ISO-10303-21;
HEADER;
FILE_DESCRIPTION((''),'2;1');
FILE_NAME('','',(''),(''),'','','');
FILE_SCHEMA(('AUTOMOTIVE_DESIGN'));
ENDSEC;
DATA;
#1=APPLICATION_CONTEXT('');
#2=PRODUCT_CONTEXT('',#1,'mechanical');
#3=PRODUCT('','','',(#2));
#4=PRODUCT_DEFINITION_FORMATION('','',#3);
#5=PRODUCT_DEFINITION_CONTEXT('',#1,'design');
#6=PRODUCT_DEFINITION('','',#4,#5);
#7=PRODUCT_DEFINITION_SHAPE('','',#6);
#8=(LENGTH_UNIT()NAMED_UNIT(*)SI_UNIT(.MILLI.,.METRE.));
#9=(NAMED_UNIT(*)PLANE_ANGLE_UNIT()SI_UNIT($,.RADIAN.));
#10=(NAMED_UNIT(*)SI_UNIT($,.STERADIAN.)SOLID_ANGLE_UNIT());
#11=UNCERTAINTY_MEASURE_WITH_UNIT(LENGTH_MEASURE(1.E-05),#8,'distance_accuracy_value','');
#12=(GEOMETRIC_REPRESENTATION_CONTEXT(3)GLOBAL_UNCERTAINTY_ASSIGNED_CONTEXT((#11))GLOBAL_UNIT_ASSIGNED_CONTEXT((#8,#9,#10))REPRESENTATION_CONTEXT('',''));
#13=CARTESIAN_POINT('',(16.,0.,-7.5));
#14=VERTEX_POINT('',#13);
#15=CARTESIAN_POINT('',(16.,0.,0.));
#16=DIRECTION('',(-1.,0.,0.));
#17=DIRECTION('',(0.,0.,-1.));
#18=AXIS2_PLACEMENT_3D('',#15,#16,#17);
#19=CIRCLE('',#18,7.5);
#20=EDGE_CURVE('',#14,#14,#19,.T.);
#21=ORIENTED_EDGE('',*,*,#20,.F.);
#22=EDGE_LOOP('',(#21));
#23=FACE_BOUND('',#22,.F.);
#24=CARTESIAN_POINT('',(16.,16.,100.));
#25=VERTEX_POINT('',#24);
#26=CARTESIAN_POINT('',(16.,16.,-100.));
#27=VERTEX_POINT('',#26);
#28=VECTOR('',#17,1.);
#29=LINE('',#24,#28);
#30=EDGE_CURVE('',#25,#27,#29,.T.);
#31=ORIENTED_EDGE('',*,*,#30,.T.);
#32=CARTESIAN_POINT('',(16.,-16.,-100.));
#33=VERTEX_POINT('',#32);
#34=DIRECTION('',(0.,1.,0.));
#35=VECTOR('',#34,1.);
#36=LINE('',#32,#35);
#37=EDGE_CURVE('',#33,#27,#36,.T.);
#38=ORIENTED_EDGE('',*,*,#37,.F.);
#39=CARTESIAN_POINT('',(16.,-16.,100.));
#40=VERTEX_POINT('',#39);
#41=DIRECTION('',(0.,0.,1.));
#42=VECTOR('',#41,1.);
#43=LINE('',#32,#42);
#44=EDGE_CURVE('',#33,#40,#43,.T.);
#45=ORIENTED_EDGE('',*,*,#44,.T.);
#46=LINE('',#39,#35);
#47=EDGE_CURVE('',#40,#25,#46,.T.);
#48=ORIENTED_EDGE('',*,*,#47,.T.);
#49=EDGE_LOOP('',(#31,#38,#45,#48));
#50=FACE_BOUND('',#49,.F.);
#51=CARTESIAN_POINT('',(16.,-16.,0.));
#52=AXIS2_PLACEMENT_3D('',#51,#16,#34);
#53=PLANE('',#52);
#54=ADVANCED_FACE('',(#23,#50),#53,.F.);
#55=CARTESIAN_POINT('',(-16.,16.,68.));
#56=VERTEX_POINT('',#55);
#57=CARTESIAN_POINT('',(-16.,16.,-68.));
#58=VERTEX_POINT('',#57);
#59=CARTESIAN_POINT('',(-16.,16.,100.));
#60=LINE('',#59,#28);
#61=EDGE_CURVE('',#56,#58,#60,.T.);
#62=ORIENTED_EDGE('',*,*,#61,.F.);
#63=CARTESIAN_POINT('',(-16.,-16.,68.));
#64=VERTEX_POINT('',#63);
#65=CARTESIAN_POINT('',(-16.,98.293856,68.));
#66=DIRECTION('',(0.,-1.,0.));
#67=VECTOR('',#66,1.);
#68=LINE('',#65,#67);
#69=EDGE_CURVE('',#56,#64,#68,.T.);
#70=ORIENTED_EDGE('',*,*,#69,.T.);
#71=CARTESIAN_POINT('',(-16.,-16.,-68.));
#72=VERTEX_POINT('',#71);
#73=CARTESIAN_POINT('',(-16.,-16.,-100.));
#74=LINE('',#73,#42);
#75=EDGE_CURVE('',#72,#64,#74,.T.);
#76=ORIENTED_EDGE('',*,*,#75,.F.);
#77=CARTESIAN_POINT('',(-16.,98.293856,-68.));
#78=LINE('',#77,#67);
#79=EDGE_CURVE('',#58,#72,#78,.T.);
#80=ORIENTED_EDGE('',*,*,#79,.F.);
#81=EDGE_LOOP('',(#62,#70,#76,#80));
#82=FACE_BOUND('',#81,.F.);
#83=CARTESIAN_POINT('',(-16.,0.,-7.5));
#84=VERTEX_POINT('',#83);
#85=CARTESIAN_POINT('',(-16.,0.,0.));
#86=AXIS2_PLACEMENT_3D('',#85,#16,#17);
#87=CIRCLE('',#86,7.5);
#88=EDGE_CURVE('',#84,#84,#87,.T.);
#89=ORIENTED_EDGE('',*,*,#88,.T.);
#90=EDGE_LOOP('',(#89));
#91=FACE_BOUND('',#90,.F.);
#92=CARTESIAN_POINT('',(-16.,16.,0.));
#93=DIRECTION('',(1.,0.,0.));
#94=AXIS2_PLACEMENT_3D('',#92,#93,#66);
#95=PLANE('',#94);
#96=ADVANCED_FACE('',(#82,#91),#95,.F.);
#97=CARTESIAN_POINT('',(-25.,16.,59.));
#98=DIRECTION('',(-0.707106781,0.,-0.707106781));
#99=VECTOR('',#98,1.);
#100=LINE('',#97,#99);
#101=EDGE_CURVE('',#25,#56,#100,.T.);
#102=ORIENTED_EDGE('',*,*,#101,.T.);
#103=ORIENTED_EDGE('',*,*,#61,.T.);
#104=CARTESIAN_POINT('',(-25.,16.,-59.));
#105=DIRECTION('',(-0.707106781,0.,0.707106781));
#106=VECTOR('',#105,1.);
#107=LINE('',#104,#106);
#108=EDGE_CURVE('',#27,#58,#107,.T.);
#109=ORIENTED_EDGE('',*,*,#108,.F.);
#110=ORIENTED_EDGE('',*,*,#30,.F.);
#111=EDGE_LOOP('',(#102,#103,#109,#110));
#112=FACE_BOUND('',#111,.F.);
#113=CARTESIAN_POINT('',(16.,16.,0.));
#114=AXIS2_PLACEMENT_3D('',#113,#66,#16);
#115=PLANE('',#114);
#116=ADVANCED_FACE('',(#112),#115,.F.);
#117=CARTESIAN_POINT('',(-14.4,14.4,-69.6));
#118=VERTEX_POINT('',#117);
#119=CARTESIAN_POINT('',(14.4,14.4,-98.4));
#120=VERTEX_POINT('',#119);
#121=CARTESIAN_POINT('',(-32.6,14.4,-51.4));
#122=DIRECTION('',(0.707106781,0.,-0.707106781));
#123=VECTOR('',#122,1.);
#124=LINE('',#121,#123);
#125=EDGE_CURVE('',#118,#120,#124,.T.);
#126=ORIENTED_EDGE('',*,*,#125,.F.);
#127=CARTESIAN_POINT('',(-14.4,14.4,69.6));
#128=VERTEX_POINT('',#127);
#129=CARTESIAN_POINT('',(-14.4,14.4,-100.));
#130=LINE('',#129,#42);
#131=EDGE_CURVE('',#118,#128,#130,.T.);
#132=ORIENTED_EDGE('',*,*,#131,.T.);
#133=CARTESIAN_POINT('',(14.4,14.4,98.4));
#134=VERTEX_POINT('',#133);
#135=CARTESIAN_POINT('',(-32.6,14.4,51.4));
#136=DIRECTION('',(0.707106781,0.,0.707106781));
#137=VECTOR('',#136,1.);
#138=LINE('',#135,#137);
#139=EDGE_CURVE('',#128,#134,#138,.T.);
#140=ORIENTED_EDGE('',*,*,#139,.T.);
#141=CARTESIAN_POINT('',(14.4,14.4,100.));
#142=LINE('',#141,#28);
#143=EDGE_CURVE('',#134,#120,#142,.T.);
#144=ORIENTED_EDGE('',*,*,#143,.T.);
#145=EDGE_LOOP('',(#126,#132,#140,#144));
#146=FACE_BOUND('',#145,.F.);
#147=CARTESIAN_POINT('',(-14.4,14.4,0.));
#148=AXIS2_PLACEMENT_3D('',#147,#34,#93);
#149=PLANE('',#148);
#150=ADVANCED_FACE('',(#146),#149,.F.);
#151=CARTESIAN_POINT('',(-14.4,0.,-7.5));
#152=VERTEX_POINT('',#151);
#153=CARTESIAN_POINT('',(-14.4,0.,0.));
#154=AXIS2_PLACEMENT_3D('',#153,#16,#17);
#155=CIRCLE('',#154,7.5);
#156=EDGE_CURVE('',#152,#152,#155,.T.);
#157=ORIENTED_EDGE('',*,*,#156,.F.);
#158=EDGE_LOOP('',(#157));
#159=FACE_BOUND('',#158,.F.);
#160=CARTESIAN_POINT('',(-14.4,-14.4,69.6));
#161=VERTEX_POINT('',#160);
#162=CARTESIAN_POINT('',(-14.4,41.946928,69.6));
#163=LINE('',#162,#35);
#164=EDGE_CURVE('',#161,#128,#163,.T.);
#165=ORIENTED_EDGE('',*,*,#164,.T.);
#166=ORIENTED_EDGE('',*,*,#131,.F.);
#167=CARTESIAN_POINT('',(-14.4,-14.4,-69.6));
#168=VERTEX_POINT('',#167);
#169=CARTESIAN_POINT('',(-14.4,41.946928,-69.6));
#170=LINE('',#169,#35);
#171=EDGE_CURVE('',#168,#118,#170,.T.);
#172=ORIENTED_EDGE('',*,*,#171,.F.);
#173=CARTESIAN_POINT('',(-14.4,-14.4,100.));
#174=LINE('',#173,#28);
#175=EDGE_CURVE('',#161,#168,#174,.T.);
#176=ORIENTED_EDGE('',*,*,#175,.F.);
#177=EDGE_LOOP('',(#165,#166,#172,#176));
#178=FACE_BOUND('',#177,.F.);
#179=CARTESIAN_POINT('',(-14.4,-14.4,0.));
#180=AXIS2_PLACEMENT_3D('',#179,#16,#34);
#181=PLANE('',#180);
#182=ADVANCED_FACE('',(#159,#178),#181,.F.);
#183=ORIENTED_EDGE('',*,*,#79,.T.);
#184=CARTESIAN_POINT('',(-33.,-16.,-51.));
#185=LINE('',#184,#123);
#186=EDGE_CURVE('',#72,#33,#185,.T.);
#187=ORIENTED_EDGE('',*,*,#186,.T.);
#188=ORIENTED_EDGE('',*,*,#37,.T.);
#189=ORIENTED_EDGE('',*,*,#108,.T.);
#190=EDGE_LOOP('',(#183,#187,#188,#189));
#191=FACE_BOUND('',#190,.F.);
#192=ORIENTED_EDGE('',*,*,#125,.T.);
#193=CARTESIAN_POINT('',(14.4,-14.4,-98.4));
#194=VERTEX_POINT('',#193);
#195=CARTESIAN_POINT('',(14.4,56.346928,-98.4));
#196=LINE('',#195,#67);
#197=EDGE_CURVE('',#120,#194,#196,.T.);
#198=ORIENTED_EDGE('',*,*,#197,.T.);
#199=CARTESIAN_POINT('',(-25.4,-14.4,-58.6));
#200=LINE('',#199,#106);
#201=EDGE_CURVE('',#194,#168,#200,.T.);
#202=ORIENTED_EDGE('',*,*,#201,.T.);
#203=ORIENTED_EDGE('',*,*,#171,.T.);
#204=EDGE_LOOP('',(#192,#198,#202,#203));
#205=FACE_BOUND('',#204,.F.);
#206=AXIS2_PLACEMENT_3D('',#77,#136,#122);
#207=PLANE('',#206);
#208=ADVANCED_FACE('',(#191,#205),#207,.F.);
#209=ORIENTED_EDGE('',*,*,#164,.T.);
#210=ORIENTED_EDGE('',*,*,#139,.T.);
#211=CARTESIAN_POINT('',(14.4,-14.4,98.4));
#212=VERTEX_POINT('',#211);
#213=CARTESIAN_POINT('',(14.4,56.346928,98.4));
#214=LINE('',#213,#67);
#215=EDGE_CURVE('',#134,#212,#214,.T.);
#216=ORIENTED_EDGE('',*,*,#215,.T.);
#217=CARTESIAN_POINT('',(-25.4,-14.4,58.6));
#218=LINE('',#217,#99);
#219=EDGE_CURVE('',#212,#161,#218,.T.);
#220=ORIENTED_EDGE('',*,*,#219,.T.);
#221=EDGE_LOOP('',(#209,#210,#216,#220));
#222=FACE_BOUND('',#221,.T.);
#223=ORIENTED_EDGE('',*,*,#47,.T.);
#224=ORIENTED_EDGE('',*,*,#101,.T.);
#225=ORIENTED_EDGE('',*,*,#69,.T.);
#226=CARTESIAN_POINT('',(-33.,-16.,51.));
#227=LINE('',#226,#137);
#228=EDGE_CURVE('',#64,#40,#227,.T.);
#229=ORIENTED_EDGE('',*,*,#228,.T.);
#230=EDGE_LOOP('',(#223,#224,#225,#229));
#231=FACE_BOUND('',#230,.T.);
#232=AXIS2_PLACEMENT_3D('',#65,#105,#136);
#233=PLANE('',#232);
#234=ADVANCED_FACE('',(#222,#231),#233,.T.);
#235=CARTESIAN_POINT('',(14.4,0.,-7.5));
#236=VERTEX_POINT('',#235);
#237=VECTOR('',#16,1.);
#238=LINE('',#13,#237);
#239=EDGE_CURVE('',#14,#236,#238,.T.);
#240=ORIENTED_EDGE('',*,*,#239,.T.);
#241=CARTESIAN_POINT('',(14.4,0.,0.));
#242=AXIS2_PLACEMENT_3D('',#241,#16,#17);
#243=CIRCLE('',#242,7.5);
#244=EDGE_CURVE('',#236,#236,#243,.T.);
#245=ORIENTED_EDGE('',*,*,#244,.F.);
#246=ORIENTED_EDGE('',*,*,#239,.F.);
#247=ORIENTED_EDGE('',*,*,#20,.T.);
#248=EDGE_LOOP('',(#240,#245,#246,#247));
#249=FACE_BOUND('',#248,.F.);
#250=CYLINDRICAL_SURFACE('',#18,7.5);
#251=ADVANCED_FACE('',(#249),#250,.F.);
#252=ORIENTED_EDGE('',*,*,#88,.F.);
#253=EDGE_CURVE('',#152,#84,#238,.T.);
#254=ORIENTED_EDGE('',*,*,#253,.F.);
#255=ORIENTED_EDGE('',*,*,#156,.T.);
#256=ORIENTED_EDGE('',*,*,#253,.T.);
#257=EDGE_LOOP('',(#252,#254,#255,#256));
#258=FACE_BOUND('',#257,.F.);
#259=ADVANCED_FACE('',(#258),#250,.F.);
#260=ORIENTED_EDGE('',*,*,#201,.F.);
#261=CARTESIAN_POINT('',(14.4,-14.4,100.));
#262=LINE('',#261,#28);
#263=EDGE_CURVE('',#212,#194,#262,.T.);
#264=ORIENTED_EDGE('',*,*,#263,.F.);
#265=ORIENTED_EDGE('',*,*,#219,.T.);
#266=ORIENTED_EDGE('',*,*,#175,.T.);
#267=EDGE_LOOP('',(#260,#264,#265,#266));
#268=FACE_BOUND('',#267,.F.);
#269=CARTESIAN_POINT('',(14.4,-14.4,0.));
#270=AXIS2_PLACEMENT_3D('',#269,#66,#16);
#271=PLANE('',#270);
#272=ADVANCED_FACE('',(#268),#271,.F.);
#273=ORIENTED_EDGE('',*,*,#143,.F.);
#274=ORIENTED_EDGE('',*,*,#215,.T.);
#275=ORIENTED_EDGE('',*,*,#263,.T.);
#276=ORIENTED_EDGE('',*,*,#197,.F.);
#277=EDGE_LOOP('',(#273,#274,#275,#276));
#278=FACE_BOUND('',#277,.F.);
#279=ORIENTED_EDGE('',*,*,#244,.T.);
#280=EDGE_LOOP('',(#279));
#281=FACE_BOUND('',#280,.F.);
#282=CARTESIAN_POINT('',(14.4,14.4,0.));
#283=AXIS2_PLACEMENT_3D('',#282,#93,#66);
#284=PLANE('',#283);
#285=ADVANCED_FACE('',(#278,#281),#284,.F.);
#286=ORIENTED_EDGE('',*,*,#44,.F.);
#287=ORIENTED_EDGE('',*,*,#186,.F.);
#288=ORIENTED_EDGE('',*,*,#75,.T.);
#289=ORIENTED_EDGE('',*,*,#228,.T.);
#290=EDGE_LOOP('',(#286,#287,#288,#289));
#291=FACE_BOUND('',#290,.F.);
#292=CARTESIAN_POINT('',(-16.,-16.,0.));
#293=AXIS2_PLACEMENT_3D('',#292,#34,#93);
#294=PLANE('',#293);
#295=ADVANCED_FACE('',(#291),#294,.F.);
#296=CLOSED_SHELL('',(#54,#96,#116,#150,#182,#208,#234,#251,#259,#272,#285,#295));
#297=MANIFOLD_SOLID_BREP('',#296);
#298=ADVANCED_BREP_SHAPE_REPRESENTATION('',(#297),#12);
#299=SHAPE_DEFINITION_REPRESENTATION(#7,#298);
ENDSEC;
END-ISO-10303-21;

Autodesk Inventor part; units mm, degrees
ref_plane "YZ Plane" through (0, 0, 0) normal (1, 0, 0) x (0, 1, 0)
ref_plane "XZ Plane" through (0, 0, 0) normal (0, 1, 0) x (-1, 0, 0)
ref_plane "XY Plane" through (0, 0, 0) normal (0, 0, 1) x (1, 0, 0)
sketch "スケッチ1" plane through (0, 0, 0) normal (0, 0, 1) x (1, 0, 0)
  line L0 (-16, -16) -> (16, -16)
  line L1 (16, -16) -> (16, 16)
  line L2 (16, 16) -> (-16, 16)
  line L3 (-16, 16) -> (-16, -16)
  line L4 (-16, -16) -> (16, 16) construction
  line L5 (16, -16) -> (-16, 16) construction
  line L6 (-14.4, 14.4) -> (14.4, 14.4)
  line L7 (14.4, 14.4) -> (14.4, -14.4)
  line L8 (14.4, -14.4) -> (-14.4, -14.4)
  line L9 (-14.4, -14.4) -> (-14.4, 14.4)
  point P0 (0, 0)
  dimension "d0" = 32
  dimension "d1" = 32
  dimension "d2" = 1.6
extrude "押し出し1" add sketch "スケッチ1" along normal mid plane 200
chamfer "面取り1" distance 32 angle 45 1 edges at (-16, 0, 100)
chamfer "面取り2" distance 32 angle 45 1 edges at (-16, 0, -100)
sketch "スケッチ2" plane through (16, -16, 100) normal (1, 0, 0) x (0, 0, -1)
  point P0 (100, 16)
  point P1 (100, 16)
hole "穴1" at (16, 0, 0) direction (-1, 0, 0) diameter 15 end through all
properties part number "Pipe横"
